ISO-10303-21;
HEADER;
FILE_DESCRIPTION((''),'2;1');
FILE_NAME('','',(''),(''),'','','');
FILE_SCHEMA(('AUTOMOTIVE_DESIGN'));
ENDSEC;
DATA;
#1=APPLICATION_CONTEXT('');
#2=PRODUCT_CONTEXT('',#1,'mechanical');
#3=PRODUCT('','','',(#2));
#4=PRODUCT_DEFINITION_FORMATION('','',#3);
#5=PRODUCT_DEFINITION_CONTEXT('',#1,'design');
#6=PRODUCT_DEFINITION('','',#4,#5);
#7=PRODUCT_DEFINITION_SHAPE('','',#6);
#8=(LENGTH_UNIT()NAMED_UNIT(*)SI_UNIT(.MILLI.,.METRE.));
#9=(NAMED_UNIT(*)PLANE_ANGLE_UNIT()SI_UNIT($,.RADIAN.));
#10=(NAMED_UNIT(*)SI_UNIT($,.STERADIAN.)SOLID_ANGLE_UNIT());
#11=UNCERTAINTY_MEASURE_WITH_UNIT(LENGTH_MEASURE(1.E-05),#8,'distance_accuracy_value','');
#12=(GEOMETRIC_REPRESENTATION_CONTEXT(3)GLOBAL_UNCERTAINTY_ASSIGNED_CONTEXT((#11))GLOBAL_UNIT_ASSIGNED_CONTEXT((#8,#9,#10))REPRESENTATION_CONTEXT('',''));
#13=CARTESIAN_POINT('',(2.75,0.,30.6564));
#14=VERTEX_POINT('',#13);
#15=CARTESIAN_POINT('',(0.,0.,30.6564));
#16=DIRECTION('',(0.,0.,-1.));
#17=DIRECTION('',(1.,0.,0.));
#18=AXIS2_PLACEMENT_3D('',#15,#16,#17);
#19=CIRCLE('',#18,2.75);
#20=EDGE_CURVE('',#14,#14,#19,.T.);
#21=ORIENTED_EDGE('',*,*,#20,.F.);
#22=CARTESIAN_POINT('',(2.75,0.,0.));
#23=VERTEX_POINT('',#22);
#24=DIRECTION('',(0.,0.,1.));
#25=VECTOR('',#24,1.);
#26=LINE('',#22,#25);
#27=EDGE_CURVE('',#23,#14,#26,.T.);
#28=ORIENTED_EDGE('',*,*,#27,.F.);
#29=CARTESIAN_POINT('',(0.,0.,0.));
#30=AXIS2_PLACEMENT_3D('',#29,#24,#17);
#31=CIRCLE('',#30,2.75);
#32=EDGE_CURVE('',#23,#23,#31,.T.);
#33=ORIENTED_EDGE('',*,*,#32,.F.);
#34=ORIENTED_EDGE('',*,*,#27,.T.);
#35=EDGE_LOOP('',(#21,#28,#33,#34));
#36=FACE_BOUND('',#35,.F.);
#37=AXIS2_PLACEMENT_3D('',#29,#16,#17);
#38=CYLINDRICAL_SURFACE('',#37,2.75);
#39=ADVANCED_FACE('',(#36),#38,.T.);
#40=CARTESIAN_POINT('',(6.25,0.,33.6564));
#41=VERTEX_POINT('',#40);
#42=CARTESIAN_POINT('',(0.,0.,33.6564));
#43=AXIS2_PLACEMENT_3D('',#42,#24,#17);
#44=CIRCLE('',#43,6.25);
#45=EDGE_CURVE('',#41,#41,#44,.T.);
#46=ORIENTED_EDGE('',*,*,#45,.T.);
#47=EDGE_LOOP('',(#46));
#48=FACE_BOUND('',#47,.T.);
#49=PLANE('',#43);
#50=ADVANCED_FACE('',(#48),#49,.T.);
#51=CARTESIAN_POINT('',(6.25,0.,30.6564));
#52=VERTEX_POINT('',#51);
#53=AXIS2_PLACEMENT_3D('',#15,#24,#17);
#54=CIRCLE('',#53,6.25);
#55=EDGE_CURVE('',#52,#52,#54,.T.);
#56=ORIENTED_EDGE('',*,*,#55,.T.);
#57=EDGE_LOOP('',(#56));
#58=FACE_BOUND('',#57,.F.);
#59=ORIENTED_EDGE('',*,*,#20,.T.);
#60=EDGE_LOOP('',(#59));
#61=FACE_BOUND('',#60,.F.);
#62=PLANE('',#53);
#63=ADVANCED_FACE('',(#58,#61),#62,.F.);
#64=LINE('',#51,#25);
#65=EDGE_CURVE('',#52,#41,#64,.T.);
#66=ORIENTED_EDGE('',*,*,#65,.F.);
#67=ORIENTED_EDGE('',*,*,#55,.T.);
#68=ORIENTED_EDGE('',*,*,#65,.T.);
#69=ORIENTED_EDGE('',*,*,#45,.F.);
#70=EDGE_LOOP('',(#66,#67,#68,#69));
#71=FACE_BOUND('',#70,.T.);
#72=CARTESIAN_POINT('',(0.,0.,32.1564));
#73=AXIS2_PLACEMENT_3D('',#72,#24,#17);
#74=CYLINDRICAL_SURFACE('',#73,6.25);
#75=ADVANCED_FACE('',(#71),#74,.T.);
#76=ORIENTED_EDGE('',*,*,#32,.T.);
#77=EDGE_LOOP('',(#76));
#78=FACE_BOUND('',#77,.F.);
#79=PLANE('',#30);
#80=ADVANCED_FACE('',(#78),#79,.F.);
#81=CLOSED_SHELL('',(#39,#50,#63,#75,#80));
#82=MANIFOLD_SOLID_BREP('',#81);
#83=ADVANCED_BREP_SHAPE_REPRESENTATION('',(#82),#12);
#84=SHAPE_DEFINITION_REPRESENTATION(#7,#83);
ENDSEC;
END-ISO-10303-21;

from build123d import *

# Parameters (mm, degrees)
F0_R          = 2.75
F1_DEPTH      = 32.1564
F2_R          = 6.25
F2_R_2        = 2.75
F3_DEPTH      = 1.5
F3_DEPTH_BACK = 1.5


with BuildPart() as f1:
    # F0 (on Top) → F1 (new body)
    with BuildSketch(Plane.XY):
        Circle(F0_R)
    extrude(amount=F1_DEPTH)

    # F2 (on face) → F3 (join, two sides)
    with BuildSketch(Plane.XY.offset(32.1564)) as f3_sk:
        Circle(F2_R)
        Circle(F2_R_2, mode=Mode.SUBTRACT)
        Circle(F2_R_2)
    extrude(amount=F3_DEPTH)
    extrude(f3_sk.sketch, amount=-F3_DEPTH_BACK)


solid = f1.part
